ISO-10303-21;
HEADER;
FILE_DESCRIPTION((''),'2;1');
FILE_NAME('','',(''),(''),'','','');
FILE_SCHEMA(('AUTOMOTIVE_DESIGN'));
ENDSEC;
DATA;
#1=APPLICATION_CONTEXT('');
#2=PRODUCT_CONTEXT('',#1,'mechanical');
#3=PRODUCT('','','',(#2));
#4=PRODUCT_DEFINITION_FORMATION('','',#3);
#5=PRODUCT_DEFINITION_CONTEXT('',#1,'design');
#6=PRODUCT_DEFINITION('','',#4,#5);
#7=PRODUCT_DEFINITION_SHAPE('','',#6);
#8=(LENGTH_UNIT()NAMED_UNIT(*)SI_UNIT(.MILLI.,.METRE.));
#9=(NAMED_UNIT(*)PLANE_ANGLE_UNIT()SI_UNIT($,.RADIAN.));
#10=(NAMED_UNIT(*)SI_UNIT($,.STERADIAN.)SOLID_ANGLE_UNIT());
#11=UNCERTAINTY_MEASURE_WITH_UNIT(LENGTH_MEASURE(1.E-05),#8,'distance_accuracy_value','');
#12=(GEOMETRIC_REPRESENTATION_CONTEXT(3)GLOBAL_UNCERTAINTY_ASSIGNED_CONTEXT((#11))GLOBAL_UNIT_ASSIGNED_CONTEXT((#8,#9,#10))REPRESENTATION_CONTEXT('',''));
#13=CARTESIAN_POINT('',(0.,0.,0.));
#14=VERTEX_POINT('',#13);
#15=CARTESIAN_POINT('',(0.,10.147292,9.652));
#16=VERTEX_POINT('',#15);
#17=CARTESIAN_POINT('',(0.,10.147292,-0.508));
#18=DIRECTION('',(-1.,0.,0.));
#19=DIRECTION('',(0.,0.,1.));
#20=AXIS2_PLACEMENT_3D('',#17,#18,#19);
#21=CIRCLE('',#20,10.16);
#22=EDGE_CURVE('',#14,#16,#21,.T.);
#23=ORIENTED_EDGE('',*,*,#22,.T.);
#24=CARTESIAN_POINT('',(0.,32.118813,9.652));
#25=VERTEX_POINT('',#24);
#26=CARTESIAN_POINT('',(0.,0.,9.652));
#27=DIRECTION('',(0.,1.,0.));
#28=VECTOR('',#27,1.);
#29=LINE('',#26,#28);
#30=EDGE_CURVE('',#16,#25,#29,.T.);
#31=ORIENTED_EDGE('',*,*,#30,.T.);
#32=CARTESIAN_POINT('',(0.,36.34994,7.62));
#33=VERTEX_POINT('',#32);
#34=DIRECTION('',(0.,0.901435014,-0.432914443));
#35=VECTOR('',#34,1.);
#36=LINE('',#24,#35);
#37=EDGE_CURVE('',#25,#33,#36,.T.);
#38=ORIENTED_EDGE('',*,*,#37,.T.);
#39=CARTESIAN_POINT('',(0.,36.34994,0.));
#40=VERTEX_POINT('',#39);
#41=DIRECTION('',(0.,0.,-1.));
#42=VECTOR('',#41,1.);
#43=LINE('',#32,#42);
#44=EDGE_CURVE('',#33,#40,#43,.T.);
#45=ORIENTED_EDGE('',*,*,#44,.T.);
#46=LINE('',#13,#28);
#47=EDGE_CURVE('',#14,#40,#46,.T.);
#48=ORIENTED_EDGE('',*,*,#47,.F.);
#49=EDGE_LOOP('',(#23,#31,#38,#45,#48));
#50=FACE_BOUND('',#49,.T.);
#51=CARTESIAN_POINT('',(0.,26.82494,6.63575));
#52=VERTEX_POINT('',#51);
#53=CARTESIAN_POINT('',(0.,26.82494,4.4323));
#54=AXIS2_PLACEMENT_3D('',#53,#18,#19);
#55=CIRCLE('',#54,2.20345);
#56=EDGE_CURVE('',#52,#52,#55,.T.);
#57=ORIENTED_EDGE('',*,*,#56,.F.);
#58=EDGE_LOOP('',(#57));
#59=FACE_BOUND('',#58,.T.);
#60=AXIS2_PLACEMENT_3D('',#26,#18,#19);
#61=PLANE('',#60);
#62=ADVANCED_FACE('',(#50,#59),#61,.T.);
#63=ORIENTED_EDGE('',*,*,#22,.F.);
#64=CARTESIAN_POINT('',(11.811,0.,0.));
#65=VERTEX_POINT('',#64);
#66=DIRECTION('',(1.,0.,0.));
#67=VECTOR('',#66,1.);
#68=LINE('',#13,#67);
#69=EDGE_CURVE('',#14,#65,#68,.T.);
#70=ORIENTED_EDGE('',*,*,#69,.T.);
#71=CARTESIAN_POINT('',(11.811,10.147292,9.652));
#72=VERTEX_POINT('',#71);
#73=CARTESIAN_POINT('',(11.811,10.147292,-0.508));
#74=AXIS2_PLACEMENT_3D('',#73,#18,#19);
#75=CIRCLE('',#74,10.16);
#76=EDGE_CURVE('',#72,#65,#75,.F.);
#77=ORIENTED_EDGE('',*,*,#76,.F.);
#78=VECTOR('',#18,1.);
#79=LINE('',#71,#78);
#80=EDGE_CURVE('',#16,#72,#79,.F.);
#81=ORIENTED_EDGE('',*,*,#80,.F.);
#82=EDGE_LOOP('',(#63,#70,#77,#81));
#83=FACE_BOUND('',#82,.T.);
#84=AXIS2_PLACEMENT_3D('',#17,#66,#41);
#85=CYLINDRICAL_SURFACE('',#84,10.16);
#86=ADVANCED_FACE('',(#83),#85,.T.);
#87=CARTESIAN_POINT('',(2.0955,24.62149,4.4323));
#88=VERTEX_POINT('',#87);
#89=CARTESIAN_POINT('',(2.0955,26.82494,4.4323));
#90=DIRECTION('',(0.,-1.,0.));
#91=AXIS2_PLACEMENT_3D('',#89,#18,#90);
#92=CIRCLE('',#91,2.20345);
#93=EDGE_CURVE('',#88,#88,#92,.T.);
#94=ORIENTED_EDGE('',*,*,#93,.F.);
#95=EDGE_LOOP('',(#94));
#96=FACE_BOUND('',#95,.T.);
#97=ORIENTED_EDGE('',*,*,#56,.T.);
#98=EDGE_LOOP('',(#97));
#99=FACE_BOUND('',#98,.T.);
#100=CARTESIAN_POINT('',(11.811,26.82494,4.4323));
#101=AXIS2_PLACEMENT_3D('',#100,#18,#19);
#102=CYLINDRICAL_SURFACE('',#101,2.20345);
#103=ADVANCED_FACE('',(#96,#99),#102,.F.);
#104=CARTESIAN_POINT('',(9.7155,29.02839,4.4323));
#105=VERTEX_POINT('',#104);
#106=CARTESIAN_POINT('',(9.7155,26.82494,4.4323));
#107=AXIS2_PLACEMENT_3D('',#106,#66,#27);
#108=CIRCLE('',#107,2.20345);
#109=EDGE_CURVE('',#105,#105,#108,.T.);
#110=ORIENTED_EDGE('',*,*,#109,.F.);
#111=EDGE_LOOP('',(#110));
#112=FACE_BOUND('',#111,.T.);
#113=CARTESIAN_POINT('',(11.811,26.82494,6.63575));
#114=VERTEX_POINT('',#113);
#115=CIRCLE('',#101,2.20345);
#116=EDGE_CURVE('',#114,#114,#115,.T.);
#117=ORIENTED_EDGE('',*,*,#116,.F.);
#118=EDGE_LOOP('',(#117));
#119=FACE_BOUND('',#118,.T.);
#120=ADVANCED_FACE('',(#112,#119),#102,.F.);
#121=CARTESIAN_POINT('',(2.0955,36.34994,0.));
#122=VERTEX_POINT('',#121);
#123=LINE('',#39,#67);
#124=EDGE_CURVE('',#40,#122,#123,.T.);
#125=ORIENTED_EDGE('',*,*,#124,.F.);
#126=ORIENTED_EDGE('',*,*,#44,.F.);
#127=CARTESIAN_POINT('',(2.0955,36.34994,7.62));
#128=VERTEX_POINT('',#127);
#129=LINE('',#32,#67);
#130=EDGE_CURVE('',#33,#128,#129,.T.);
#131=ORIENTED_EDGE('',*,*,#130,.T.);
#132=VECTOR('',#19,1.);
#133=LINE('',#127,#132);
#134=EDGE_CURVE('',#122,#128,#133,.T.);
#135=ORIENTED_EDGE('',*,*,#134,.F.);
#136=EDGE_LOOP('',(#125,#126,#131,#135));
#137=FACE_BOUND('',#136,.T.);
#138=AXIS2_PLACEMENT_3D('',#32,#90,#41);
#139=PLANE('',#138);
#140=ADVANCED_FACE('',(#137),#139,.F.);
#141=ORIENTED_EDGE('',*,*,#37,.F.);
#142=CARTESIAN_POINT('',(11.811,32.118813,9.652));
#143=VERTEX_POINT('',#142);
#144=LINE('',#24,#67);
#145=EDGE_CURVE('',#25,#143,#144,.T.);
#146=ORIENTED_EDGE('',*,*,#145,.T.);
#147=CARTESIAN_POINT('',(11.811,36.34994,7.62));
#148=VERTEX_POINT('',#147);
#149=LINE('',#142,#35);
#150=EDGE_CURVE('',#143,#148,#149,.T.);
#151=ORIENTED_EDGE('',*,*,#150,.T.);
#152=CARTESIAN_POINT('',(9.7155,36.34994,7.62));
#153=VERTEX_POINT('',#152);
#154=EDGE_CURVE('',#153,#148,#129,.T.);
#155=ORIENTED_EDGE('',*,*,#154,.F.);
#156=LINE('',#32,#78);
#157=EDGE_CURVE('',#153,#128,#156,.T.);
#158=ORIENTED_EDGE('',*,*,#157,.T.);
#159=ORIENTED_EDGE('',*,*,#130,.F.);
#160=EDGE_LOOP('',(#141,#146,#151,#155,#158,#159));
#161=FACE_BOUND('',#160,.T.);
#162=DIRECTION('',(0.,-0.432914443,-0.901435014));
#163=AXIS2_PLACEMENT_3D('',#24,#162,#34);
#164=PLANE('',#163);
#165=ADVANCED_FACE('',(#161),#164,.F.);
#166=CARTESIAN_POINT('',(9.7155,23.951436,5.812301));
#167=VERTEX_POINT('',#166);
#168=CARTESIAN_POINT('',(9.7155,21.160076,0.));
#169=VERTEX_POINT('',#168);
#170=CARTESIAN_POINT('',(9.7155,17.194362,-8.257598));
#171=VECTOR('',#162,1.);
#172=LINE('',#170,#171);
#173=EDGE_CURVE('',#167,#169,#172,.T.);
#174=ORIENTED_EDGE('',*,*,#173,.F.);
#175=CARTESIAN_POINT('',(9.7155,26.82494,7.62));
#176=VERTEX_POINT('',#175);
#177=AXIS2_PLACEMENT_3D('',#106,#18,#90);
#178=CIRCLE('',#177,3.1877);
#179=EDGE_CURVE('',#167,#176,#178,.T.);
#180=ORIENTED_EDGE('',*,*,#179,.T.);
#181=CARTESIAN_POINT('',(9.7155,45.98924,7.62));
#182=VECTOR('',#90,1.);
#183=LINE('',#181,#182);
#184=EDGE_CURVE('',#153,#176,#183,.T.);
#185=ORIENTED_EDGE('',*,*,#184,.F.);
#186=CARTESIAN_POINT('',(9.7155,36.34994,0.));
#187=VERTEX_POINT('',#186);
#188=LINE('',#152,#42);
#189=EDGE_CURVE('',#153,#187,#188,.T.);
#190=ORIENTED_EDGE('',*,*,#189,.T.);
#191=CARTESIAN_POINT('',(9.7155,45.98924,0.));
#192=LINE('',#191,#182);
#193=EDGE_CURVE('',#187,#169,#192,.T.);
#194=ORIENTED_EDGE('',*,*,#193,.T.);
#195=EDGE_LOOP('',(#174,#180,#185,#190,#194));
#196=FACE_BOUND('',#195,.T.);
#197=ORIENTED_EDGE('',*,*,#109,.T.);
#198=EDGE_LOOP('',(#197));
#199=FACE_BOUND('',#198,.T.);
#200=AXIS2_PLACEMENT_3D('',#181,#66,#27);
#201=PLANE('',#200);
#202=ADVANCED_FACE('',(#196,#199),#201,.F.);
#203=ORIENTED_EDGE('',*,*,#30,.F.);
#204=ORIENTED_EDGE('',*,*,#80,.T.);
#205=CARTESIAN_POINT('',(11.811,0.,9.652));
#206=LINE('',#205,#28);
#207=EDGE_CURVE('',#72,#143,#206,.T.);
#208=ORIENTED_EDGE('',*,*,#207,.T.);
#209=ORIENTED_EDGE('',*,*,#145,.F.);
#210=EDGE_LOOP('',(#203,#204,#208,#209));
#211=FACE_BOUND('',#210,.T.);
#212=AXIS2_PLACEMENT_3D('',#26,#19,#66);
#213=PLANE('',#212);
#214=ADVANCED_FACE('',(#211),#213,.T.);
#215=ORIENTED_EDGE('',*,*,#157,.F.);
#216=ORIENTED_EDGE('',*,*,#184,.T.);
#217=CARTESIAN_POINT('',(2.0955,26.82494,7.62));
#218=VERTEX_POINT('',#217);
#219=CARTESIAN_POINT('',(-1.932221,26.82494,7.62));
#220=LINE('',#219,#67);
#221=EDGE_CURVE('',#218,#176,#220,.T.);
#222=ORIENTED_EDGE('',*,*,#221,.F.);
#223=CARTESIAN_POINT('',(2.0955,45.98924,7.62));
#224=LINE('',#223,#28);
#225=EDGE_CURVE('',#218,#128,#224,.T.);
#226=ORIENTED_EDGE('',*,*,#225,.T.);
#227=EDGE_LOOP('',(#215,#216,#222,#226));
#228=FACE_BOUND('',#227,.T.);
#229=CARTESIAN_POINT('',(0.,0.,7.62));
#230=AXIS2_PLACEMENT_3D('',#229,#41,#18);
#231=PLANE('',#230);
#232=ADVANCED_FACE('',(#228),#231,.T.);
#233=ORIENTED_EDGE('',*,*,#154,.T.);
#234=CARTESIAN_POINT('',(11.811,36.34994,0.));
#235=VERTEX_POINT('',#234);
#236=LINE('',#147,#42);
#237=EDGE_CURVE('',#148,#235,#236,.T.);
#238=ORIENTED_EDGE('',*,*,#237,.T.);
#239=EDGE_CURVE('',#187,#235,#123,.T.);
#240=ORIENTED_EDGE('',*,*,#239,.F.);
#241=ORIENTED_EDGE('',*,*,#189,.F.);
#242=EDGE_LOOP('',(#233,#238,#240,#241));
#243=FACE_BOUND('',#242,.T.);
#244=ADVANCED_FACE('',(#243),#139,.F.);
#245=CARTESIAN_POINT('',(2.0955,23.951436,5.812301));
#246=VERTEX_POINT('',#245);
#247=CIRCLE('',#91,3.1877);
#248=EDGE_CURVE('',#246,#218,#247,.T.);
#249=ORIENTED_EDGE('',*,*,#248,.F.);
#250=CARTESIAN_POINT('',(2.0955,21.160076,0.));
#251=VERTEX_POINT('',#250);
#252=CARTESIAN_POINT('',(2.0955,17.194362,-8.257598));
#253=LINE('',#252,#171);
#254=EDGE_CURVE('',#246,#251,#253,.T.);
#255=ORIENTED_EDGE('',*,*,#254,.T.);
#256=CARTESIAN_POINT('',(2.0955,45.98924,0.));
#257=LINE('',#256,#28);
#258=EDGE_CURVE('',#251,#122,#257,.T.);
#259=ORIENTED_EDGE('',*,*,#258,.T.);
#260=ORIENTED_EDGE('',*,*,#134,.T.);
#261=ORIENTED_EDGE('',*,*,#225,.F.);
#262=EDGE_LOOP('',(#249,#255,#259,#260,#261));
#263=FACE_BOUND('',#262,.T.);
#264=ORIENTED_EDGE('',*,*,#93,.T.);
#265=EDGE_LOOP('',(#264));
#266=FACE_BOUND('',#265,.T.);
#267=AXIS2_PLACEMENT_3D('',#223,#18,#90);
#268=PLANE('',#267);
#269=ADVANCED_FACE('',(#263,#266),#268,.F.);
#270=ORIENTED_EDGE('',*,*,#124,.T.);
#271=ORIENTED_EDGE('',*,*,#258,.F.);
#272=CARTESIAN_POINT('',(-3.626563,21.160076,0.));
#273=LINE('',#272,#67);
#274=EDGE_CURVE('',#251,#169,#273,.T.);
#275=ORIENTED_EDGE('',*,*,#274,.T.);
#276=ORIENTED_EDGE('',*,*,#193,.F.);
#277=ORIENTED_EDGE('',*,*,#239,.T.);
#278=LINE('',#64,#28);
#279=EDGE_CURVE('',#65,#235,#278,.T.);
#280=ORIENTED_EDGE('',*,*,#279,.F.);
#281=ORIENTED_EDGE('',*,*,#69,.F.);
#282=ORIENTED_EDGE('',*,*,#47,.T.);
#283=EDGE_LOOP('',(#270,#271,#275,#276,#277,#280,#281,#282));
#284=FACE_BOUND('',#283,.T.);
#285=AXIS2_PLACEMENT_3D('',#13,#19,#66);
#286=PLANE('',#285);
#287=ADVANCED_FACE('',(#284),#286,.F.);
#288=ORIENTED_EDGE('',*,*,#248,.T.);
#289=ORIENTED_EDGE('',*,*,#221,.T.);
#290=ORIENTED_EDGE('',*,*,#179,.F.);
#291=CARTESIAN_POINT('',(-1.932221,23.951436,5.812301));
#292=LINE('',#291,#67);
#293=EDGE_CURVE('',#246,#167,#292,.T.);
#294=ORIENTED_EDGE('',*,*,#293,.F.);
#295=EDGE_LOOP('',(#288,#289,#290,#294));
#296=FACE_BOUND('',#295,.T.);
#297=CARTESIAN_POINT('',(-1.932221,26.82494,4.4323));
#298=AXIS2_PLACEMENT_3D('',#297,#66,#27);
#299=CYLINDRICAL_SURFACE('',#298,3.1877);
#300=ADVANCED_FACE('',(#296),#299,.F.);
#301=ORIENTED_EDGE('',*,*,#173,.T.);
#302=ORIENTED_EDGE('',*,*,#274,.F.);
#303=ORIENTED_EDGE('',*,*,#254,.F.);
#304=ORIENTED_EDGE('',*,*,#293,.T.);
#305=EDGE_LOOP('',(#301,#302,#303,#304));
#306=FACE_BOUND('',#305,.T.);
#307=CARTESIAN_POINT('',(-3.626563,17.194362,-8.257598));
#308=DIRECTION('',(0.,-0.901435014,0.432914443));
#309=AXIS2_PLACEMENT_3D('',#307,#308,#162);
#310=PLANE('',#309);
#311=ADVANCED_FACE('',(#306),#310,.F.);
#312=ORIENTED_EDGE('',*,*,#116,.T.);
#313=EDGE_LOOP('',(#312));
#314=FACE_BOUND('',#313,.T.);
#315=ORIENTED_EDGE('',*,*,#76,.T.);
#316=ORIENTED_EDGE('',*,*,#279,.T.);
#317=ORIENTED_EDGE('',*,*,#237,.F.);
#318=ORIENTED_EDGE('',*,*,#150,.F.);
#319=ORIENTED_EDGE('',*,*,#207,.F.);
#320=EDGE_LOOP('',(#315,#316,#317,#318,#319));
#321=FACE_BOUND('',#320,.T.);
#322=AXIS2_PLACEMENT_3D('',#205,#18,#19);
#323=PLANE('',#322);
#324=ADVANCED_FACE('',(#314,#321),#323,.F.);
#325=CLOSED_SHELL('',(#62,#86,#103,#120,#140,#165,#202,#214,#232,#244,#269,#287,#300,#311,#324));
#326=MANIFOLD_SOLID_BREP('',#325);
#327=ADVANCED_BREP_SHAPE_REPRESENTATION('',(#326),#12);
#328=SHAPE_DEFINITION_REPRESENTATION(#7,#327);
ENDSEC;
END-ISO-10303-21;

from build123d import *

# Parameters (mm, degrees)
SKETCH1_W               = 11.811
SKETCH1_H               = 45.98924
BOSS_EXTRUDE1_DEPTH     = 9.652
FILLET5_R               = 4.826
SKETCH2_W               = 7.62
SKETCH2_H               = 22.352
CUT_EXTRUDE1_DEPTH      = 7.62
CUT_EXTRUDE2_DEPTH      = 49.452771033
CUT_EXTRUDE2_DEPTH_BACK = 49.452771033
SKETCH3_R               = 2.20345
FILLET4_R               = 4.826
FILLET6_R               = 10.16
CUT_EXTRUDE3_DEPTH      = 49.452771033
CUT_EXTRUDE4_DEPTH      = 7.62
BOSS_EXTRUDE2_DEPTH     = 7.62


with BuildPart() as part:
    # Sketch1 → Boss-Extrude1 (new body)
    with BuildSketch(Plane.XY):
        with Locations((5.9055, 22.99462)):
            Rectangle(SKETCH1_W, SKETCH1_H)
    extrude(amount=BOSS_EXTRUDE1_DEPTH)

    # Fillet5
    fillet5_edges = [part.edges().sort_by_distance(p)[0] for p in [
        (5.9055, 45.98924, 0),
    ]]
    fillet(fillet5_edges, radius=FILLET5_R)

    # Sketch2 → Cut-Extrude1 (cut)
    with BuildSketch(Plane(origin=(0, 0, 0), x_dir=(-1, 0, 0), z_dir=(0, 0, -1))):
        with Locations((-5.9055, 34.81324)):
            Rectangle(SKETCH2_W, SKETCH2_H)
    extrude(amount=-CUT_EXTRUDE1_DEPTH, mode=Mode.SUBTRACT)

    # Sketch3 → Cut-Extrude2 (cut, two sides: drawn at the far end of the back side and taken through both)
    with BuildSketch(Plane.ZY.offset(-CUT_EXTRUDE2_DEPTH_BACK)):
        with Locations((4.4323, 26.82494)):
            Circle(SKETCH3_R)
    extrude(amount=CUT_EXTRUDE2_DEPTH + CUT_EXTRUDE2_DEPTH_BACK, mode=Mode.SUBTRACT)

    # Fillet4
    # the kernel refuses this fillet: 4.826 mm, written as the material it takes off along each edge
    with BuildSketch(Plane(origin=(23.876, 45.98924, 9.652), x_dir=(0, 0, -1), z_dir=(-1, 0, 0))) as fillet4_piece_1:
        with BuildLine():
            CenterArc((FILLET4_R, FILLET4_R), FILLET4_R, 180, 90)
            Line((0, FILLET4_R), (0, 0))
            Line((0, 0), (FILLET4_R, 0))
        make_face()
    extrude(amount=35.941, mode=Mode.SUBTRACT)

    # Fillet6
    # the kernel refuses this fillet: 10.16 mm, written as the material it takes off along each edge
    with BuildSketch(Plane(origin=(-25.368230131, 0, 9.652), x_dir=(0, 1, 0), z_dir=(1, 0, 0))) as fillet6_piece_1:
        with BuildLine():
            CenterArc((10.147292053, -10.16), FILLET6_R, 90, 87.134016017)
            Line((0, -9.652), (-0.202945841, -9.64184))
            ThreePointArc((-0.202945841, -9.64184), (-0.2032, -4.826), (-0.2032, 0))
            Line((-0.2032, 0), (0, 0.2032))
            Line((0, 0.2032), (10.147292053, 0.2032))
            Line((10.147292053, 0.2032), (10.147292053, 0))
        make_face()
    extrude(amount=62.547460263, mode=Mode.SUBTRACT)

    # Sketch4 → Cut-Extrude3 (cut, through all)
    with BuildSketch(Plane(origin=(11.811, 0, 0), x_dir=(0, 0, -1), z_dir=(1, 0, 0))):
        Polygon((-9.652, 32.118813088), (-7.62, 36.34994), (0, 36.34994), (0, 45.98924), (-9.652, 45.98924), align=None)
    extrude(amount=-CUT_EXTRUDE3_DEPTH, mode=Mode.SUBTRACT)

    # Sketch5 → Cut-Extrude4 (cut)
    with BuildSketch(Plane.ZY.offset(-9.7155)):
        Polygon((0, 21.160076085), (5.158068358, 23.63724), (0, 23.63724), align=None)
    extrude(amount=CUT_EXTRUDE4_DEPTH, mode=Mode.SUBTRACT)

    # Sketch5<3> → Boss-Extrude2 (add)
    with BuildSketch(Plane.ZY.offset(-9.7155)):
        with BuildLine():
            Line((5.812301369, 23.951435604), (5.158068358, 23.63724))
            Line((5.158068358, 23.63724), (7.62, 23.63724))
            Line((7.62, 23.63724), (7.62, 26.82494))
            ThreePointArc((7.62, 26.82494), (7.130490287, 25.127530072), (5.812301369, 23.951435604))
        make_face()
    extrude(amount=BOSS_EXTRUDE2_DEPTH)


solid = part.part
